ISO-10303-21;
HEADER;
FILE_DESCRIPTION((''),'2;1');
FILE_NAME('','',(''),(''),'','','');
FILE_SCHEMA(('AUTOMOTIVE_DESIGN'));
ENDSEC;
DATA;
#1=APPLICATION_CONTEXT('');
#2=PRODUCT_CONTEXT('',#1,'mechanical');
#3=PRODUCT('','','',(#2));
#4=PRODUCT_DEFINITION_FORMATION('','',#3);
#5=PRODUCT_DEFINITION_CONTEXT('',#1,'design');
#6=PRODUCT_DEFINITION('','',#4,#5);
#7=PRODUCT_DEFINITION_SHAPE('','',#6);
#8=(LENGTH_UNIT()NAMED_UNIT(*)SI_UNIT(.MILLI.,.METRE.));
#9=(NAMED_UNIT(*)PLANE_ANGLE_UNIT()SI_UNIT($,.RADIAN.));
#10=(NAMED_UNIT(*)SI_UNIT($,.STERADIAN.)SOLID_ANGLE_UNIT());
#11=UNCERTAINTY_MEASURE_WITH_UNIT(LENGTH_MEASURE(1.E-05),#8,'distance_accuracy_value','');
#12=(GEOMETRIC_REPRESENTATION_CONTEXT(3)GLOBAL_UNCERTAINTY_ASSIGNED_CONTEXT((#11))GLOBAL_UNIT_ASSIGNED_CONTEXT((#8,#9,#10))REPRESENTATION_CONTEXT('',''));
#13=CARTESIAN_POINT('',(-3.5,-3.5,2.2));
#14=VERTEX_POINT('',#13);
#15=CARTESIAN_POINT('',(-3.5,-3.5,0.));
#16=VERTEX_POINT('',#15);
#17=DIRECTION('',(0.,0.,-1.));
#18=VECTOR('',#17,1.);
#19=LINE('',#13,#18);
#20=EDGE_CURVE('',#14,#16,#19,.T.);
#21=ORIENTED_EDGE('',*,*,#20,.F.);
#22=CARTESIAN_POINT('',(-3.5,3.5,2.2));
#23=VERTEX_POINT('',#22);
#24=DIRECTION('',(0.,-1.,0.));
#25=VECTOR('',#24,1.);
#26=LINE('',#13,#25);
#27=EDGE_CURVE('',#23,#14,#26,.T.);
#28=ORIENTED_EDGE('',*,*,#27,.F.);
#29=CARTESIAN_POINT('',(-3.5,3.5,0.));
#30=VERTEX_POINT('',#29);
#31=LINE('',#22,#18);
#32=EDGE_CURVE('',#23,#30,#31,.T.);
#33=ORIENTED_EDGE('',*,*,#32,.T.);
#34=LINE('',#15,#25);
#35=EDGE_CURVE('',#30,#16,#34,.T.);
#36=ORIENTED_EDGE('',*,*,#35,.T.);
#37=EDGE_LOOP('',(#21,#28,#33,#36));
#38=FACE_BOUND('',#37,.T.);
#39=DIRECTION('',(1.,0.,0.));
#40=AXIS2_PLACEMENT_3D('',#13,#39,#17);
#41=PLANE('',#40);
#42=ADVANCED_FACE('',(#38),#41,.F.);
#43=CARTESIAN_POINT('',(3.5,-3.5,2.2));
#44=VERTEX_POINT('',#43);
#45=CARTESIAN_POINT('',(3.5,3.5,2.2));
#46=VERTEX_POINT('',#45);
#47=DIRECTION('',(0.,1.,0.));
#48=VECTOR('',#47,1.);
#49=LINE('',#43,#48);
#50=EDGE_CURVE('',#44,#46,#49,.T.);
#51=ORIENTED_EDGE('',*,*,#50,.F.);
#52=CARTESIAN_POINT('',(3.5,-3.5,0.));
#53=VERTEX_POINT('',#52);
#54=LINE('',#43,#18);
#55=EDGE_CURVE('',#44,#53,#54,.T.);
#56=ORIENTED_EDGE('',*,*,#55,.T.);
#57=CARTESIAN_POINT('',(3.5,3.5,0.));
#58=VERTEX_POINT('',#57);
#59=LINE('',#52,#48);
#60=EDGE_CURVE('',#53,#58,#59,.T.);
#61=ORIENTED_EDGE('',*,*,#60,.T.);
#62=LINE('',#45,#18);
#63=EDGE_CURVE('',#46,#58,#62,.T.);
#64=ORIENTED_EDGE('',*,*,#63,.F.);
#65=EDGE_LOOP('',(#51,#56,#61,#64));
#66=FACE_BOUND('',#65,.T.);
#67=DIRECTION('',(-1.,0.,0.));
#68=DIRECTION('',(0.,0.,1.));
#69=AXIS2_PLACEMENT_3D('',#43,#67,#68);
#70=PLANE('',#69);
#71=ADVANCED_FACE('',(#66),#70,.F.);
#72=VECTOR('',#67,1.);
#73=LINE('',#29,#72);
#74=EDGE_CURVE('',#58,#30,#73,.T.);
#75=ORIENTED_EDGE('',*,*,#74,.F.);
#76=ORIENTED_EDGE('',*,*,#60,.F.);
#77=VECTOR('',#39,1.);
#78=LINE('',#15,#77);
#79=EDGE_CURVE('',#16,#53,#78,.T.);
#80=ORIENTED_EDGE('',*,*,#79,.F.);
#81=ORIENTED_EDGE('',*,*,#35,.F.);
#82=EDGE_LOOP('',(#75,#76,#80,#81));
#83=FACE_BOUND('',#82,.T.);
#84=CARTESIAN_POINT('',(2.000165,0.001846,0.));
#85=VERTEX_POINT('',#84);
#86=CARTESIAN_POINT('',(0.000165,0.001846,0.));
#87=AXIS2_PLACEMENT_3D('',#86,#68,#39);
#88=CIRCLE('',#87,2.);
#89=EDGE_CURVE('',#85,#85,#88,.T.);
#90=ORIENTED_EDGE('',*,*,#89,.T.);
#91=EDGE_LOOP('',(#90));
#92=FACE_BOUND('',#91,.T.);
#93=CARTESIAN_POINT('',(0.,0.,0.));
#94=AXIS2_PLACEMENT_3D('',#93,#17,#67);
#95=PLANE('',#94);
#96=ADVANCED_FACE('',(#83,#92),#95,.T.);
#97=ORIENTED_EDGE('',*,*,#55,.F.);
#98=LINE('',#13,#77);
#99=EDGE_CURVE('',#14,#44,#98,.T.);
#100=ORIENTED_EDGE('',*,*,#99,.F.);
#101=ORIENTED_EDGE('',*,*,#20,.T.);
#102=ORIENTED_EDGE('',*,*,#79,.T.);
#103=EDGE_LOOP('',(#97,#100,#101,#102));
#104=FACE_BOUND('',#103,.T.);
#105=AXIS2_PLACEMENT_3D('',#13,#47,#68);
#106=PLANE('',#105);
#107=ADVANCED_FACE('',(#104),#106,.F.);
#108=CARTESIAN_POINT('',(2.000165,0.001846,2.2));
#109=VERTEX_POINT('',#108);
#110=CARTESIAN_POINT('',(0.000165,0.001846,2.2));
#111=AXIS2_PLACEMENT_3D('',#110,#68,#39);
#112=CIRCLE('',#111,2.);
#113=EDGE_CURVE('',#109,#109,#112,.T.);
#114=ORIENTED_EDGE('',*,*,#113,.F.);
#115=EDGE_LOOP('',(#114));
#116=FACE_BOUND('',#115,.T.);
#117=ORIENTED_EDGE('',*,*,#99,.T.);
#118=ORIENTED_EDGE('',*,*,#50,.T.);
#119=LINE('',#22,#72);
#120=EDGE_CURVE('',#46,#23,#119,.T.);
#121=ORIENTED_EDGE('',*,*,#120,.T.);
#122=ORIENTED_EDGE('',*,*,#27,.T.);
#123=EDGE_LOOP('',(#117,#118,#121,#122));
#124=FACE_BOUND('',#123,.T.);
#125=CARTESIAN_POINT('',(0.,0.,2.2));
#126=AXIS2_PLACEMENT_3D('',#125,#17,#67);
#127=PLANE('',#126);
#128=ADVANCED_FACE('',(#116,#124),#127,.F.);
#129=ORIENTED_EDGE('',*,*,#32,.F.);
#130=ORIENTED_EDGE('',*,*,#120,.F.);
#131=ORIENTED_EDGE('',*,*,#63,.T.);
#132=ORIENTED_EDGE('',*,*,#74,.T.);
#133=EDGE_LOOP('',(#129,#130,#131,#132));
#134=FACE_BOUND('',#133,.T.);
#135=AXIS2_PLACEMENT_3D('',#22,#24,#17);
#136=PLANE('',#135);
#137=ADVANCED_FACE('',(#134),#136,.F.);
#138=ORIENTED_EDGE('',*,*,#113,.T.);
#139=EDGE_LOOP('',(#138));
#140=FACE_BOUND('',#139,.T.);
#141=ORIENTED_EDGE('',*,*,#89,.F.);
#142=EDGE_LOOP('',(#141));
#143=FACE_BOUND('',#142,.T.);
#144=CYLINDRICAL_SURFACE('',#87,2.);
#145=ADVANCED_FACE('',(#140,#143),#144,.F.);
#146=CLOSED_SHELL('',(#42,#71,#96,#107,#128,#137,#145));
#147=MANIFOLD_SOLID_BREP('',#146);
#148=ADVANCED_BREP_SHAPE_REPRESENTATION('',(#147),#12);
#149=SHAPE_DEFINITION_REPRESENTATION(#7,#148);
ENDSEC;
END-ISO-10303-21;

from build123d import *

# Parameters (mm, degrees)
SKETCH_1_W        = 7
SKETCH_1_H        = 7
EXTRUDE_1_DEPTH   = 2.2
OTHER_1_OUTLINE_R = 2
OTHER_1_DEPTH     = 2.2


# Read off the part's stored shape, not the designer's step: Отверстие1
with BuildPart() as part:
    # Эскиз1 → Бобышка-Вытянуть1 (new body)
    with BuildSketch(Plane.XY):
        Rectangle(SKETCH_1_W, SKETCH_1_H)
    extrude(amount=EXTRUDE_1_DEPTH)

    # Отверстие1 outline → Отверстие1 (cut)
    with BuildSketch(Plane.XY):
        with Locations((0.000165228, 0.001845922)):
            Circle(OTHER_1_OUTLINE_R)
    extrude(amount=OTHER_1_DEPTH, mode=Mode.SUBTRACT)


solid = part.part
